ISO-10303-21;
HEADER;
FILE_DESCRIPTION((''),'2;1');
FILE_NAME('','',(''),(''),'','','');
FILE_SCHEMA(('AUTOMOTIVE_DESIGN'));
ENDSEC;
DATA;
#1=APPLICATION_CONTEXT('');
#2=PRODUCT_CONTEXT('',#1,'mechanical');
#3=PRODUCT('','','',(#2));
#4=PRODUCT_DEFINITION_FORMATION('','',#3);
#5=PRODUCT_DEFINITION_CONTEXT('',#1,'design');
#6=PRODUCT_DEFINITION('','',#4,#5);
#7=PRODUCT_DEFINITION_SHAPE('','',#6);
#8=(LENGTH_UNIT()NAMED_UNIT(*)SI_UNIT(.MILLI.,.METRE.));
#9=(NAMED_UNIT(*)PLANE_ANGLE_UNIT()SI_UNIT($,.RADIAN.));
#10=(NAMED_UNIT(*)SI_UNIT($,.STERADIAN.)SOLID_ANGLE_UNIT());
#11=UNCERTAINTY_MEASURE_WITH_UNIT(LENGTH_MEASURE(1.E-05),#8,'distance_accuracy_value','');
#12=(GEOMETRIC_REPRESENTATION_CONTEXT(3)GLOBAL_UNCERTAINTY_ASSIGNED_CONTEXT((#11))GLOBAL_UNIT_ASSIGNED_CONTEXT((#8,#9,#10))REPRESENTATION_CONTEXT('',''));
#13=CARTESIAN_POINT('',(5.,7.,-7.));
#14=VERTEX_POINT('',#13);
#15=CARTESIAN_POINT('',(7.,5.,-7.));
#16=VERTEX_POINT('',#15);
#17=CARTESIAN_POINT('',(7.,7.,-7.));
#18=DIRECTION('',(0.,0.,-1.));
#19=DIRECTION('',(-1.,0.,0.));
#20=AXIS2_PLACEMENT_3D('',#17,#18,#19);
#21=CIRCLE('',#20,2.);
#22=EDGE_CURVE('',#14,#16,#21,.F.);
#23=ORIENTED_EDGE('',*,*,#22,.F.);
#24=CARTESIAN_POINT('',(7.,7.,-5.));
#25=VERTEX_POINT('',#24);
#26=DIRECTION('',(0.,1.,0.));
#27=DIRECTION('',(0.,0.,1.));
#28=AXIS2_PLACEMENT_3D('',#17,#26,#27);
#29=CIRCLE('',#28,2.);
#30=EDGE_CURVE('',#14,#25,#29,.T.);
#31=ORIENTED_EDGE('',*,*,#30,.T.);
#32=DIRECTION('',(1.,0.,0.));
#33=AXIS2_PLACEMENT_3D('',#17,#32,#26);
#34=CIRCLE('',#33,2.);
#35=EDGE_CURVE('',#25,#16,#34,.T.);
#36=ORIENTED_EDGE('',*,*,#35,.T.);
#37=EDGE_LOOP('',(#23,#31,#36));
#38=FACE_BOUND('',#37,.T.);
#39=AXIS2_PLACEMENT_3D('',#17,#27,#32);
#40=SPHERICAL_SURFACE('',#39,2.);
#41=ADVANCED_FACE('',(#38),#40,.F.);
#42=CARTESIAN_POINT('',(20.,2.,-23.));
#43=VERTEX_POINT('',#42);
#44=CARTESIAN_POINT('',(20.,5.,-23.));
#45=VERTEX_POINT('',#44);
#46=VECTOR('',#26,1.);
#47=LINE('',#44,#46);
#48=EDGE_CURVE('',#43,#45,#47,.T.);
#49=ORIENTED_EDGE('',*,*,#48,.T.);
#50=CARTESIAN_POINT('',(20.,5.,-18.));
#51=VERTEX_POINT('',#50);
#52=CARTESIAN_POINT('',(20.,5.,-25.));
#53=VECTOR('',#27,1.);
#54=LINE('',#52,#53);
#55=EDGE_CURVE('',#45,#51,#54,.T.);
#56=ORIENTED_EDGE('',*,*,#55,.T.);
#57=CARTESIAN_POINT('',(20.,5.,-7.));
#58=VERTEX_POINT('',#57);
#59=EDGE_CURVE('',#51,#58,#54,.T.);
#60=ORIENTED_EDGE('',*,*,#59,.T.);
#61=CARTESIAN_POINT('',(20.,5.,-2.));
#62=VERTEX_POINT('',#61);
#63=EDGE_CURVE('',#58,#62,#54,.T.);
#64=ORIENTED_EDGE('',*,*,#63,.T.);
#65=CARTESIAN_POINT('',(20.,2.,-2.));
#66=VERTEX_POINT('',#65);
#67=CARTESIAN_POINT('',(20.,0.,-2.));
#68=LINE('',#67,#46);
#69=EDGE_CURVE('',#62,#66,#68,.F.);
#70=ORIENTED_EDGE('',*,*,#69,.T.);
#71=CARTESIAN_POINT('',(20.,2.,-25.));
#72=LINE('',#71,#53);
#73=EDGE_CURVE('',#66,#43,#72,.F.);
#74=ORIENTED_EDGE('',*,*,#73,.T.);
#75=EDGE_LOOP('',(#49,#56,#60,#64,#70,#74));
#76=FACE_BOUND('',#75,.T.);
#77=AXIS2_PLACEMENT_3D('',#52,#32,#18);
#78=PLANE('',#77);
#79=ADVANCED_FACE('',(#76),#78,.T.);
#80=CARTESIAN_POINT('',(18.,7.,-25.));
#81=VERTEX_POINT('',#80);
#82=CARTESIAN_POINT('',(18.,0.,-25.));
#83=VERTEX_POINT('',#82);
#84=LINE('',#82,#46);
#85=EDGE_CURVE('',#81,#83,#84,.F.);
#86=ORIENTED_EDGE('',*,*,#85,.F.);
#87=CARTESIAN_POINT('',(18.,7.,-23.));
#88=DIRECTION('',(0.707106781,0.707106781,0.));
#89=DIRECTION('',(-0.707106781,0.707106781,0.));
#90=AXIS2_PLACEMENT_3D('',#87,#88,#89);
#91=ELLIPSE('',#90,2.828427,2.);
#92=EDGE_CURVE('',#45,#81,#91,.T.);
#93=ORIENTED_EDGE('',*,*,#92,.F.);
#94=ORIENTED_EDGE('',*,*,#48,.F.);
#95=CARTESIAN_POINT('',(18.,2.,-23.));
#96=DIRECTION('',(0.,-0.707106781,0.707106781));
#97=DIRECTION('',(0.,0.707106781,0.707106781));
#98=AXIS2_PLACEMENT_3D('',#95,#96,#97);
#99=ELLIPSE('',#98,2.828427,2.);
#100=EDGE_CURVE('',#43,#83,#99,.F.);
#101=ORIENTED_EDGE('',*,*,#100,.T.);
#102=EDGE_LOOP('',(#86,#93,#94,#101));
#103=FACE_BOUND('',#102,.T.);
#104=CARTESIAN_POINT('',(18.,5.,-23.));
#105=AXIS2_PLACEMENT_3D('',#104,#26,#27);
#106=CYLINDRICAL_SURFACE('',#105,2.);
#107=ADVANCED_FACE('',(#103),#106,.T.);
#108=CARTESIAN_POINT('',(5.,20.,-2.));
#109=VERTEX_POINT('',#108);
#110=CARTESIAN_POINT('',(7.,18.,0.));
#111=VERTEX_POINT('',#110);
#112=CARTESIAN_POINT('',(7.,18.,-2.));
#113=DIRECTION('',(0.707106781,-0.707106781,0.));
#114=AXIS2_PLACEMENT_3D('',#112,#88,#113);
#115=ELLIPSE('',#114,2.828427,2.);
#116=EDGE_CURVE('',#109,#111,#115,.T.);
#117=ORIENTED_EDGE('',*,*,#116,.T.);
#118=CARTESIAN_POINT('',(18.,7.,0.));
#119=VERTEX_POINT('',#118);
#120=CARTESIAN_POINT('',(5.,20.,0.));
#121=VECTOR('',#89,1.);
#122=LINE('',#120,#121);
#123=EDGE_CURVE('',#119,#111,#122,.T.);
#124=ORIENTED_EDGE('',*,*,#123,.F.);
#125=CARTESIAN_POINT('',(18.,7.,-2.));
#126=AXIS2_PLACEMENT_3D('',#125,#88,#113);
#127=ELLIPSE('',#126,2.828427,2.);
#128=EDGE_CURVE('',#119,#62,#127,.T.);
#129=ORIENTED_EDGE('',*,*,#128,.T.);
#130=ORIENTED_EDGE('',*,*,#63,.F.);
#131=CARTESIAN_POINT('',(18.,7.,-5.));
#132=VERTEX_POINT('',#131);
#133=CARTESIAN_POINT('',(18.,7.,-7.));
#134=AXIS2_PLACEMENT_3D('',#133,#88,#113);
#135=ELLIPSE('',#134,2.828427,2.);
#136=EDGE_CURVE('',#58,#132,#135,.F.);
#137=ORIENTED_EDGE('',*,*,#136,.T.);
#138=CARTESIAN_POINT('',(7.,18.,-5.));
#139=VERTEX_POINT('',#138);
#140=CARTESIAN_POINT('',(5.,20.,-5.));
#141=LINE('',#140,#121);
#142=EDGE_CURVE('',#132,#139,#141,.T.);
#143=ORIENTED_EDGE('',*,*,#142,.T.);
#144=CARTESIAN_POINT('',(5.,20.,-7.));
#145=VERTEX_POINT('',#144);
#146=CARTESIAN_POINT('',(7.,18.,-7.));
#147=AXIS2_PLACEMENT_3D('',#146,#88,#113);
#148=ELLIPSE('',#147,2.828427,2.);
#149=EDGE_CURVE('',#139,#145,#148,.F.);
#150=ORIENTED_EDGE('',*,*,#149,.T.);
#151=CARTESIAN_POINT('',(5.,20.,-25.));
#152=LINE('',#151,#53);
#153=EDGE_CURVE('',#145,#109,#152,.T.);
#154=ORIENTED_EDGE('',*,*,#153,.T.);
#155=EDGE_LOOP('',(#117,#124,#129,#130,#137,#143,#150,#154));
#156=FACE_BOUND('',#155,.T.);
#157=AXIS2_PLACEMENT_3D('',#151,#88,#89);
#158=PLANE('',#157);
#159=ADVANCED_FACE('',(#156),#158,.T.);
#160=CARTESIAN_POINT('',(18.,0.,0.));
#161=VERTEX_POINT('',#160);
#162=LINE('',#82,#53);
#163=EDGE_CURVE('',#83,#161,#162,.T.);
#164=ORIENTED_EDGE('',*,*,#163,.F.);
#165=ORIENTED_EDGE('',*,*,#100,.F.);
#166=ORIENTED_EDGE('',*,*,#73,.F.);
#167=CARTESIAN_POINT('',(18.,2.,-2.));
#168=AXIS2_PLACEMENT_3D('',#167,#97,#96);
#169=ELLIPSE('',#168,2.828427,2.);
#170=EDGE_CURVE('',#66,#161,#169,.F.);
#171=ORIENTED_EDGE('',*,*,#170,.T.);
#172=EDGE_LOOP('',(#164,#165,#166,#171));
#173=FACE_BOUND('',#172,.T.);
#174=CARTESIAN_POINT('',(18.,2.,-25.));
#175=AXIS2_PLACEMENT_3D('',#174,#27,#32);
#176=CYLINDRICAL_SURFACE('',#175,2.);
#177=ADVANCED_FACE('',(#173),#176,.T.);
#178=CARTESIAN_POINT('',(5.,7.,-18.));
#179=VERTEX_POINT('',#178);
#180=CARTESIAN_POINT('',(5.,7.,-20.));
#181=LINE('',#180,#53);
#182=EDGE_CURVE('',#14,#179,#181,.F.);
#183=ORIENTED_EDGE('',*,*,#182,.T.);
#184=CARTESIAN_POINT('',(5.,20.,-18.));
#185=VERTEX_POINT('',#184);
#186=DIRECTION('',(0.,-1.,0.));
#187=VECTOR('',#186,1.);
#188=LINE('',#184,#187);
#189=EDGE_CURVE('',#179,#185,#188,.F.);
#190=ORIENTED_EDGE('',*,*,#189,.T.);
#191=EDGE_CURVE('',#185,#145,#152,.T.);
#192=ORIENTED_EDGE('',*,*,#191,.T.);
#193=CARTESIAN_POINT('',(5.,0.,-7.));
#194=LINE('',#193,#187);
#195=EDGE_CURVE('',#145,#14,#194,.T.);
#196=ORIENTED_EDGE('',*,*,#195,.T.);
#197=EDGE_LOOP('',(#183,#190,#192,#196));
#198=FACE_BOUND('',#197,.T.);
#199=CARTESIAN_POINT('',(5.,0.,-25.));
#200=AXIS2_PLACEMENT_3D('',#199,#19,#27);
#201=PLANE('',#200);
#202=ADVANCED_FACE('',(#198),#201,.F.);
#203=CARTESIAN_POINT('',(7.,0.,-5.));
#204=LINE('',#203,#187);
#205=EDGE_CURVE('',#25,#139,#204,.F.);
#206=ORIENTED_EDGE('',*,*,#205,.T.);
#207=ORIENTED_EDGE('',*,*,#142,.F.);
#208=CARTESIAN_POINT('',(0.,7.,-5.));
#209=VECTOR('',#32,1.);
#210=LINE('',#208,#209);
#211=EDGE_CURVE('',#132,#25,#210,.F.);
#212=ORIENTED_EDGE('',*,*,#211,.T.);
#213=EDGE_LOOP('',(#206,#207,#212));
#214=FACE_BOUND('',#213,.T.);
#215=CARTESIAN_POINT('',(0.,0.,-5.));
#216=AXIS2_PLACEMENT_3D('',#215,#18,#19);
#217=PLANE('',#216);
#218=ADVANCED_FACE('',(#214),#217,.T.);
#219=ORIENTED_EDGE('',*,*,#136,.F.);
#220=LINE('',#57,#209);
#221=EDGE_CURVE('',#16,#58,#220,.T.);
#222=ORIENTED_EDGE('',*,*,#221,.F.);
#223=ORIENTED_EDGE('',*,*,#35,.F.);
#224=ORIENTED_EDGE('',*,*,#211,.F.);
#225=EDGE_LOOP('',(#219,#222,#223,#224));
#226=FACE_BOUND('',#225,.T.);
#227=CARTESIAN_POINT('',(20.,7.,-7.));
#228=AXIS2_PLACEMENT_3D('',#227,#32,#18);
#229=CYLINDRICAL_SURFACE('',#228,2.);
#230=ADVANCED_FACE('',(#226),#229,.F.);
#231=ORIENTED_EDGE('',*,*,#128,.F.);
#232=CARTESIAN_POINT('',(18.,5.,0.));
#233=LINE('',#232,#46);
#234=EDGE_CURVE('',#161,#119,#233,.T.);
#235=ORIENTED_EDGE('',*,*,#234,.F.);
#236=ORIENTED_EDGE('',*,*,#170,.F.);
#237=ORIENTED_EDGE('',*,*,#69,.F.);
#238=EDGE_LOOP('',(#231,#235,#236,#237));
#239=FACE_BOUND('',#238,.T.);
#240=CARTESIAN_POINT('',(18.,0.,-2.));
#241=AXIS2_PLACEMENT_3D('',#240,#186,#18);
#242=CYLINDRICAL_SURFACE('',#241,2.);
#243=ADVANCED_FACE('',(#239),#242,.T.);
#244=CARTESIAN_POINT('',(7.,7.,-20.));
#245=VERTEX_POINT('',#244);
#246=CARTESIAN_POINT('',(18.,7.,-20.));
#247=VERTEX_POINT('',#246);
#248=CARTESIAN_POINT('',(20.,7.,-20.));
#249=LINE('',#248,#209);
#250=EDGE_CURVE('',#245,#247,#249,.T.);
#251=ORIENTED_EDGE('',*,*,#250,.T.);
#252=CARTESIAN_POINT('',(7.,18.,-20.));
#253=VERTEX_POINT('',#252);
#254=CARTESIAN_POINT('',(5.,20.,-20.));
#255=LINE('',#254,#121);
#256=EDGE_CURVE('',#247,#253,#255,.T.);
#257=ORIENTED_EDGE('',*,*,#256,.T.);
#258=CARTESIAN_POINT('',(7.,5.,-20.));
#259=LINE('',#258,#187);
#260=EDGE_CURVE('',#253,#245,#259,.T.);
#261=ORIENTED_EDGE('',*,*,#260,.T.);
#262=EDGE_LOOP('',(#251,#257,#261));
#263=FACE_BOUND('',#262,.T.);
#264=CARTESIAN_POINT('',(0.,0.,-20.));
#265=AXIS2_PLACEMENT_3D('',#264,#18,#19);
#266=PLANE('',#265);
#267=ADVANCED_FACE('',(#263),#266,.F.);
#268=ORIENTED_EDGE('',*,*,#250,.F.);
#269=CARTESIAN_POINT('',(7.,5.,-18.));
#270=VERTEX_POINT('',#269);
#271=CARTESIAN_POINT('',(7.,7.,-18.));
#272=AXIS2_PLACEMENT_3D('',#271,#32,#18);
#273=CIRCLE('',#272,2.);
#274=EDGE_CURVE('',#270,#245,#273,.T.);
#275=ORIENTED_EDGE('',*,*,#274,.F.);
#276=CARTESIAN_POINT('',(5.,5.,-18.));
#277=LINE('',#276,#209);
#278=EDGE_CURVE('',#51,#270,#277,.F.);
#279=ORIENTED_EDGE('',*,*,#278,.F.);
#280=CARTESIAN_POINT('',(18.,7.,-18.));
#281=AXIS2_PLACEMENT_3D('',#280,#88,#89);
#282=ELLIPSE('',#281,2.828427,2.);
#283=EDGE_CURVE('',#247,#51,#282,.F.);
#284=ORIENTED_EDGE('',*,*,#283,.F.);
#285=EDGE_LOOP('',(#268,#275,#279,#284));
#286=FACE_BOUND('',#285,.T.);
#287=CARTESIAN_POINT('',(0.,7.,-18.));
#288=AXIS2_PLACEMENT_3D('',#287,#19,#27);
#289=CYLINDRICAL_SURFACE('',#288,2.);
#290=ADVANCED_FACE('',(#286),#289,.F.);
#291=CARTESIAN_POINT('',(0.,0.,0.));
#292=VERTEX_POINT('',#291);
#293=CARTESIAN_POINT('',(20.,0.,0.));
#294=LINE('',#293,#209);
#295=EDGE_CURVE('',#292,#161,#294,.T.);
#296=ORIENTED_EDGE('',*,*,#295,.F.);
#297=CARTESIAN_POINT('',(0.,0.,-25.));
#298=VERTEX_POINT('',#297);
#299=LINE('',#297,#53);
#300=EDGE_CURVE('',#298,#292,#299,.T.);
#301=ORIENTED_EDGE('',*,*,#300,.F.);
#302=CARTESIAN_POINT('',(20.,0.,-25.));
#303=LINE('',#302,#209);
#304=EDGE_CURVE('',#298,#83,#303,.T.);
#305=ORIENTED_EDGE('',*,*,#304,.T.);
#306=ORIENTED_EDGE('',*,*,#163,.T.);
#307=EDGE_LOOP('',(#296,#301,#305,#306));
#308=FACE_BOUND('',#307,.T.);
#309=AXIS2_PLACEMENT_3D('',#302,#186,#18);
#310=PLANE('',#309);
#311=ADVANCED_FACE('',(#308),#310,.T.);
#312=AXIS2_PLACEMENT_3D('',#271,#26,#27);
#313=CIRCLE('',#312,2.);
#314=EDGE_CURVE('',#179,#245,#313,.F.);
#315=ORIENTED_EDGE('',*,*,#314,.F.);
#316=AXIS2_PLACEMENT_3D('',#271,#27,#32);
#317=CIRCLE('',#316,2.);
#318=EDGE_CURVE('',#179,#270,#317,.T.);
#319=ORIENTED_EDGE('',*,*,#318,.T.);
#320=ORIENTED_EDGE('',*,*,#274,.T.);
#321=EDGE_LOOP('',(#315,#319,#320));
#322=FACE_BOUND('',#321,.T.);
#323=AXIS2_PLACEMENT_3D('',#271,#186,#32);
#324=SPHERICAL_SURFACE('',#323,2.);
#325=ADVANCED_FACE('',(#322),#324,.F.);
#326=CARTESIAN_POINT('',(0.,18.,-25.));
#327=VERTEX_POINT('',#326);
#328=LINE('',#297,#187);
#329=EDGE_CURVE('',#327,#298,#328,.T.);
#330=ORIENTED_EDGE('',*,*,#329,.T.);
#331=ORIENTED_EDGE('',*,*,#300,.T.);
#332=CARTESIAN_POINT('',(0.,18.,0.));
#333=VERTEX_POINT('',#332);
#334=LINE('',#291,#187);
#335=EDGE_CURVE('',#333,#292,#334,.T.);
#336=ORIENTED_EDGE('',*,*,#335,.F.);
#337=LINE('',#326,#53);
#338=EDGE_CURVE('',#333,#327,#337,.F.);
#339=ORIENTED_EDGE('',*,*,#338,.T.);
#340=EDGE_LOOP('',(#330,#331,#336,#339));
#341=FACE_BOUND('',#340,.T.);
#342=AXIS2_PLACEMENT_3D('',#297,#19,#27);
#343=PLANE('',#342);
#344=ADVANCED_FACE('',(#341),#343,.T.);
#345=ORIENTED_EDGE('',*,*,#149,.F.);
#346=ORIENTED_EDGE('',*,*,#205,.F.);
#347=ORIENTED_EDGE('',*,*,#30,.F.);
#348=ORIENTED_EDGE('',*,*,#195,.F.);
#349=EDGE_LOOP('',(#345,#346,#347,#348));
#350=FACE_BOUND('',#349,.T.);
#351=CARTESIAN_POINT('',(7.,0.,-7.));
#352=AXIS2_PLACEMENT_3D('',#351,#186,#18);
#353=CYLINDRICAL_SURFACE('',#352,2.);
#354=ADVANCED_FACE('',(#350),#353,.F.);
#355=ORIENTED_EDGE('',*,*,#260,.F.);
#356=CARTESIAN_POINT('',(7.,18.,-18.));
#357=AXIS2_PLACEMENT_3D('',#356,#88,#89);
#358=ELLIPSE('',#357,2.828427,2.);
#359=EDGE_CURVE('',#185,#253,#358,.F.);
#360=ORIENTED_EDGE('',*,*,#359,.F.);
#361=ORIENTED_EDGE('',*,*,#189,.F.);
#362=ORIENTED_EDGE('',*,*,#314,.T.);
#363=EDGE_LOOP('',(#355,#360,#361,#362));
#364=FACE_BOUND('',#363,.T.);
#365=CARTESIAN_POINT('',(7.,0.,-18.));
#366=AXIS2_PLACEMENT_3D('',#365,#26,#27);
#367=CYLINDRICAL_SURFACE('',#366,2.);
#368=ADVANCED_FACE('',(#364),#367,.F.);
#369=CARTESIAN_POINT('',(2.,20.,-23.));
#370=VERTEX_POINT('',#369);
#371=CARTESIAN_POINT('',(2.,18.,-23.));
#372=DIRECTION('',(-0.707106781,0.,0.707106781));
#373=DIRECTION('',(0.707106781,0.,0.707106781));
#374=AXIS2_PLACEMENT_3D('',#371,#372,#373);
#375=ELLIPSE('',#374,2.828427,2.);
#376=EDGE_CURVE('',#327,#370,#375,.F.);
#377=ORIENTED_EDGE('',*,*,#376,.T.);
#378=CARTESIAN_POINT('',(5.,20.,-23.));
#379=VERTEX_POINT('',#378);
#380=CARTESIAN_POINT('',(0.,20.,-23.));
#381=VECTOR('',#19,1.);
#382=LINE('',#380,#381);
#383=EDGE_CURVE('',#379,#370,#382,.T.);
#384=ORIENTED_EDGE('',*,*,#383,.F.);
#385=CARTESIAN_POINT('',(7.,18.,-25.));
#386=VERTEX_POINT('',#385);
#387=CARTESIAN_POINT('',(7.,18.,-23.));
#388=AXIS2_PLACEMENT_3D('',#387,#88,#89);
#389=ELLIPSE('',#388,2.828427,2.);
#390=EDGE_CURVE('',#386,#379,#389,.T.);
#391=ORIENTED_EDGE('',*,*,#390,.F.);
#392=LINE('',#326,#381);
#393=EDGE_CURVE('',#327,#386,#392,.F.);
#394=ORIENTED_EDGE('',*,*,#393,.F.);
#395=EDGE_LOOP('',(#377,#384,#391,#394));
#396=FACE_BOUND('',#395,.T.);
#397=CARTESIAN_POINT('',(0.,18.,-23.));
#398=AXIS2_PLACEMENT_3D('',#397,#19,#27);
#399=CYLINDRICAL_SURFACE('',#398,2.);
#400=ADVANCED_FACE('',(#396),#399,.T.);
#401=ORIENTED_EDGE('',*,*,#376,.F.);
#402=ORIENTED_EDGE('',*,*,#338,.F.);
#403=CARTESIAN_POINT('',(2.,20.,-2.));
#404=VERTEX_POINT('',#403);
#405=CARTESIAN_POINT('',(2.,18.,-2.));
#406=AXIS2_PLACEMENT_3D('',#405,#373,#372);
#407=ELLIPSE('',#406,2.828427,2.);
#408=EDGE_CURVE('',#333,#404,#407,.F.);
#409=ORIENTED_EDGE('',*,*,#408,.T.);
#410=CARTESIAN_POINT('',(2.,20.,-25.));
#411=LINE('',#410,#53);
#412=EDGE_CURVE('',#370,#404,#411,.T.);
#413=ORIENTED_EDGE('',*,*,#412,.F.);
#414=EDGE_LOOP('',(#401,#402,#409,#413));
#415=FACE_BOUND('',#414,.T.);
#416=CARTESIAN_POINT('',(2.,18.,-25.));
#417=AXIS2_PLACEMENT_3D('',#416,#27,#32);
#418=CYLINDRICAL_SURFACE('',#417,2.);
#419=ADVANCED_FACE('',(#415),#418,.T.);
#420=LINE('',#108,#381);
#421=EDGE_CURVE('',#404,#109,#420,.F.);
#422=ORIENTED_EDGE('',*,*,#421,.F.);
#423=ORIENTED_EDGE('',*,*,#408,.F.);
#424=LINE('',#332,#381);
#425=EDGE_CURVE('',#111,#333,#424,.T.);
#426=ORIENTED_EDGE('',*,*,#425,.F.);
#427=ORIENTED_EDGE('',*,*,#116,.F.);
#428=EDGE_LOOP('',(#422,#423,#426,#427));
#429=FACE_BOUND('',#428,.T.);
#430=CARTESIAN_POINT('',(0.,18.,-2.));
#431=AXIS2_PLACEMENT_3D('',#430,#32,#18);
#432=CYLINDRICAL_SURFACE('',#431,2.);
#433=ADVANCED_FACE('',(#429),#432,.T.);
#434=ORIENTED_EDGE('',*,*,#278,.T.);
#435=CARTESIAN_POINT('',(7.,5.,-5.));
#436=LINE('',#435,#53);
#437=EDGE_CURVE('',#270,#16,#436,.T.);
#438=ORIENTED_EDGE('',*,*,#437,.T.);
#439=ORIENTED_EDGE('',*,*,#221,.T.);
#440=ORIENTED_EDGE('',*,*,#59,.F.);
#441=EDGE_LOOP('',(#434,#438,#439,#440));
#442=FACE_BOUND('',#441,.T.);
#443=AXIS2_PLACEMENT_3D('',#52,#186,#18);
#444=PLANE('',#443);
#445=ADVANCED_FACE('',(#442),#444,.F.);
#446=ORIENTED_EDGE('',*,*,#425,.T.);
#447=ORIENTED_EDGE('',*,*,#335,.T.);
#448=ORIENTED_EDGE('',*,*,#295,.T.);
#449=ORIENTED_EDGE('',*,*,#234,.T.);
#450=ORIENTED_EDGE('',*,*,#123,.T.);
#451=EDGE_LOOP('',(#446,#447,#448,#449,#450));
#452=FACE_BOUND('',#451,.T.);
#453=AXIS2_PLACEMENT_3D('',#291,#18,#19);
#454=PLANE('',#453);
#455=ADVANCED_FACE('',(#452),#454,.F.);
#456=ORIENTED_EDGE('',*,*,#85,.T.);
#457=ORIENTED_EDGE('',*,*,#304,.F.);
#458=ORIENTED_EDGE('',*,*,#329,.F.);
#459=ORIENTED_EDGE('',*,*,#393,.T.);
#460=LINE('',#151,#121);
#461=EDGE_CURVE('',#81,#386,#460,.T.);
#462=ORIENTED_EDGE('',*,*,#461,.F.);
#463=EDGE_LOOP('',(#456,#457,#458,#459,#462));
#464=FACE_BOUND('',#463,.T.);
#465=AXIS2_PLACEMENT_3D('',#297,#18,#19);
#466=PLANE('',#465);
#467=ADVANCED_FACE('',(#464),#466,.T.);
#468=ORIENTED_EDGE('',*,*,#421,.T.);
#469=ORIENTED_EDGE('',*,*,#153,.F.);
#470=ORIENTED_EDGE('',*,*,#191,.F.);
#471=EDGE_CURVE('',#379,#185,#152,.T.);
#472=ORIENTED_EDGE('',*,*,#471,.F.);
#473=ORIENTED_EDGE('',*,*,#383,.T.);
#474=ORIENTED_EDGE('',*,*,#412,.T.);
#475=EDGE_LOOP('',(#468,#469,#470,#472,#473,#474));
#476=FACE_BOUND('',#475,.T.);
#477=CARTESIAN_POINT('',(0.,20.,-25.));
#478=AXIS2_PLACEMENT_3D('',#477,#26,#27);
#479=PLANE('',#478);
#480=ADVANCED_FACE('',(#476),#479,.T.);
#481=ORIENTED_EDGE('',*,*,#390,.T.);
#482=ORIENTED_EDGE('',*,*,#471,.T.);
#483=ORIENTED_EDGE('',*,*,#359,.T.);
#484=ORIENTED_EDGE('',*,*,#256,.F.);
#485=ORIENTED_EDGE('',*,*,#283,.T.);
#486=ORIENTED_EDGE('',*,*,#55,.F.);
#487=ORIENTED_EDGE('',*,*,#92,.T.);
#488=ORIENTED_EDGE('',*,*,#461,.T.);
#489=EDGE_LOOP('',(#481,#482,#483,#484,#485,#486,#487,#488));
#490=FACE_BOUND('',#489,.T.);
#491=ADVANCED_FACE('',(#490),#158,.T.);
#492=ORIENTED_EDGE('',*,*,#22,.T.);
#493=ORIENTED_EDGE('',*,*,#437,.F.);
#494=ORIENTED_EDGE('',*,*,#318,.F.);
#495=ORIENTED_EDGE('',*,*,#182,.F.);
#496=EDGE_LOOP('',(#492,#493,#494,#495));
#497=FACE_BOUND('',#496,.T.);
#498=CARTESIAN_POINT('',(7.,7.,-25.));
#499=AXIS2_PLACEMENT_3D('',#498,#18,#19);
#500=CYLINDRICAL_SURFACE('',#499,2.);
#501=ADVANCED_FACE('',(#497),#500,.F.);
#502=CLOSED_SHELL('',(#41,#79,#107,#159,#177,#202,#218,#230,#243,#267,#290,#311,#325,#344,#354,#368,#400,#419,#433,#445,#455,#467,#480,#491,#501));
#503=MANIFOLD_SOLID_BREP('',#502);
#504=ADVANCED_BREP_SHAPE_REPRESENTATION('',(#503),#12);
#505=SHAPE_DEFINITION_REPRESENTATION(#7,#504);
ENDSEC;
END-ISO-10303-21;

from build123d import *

# Parameters (mm, degrees)
BOSS_EXTRUDE2_DEPTH = 25
SHELL1_START        = 5
SHELL1_OUTLINE_W    = 16
SHELL1_OUTLINE_H    = 15
SHELL1_DEPTH        = 15
FILLET1_R           = 2
FILLET3_R           = 2


# Read off the part's stored shape, not the designer's step: Shell1
with BuildPart() as part:
    # Sketch1 → Boss-Extrude2 (new body)
    with BuildSketch(Plane.XY):
        Polygon((0, 0), (0, 20), (5, 20), (20, 5), (20, 0), align=None)
    extrude(amount=-BOSS_EXTRUDE2_DEPTH)

    # Shell1 outline → Shell1 (cut)
    with BuildSketch(Plane(origin=(0, 0, 0), x_dir=(1, 0, 0), z_dir=(0, 1, 0)).offset(SHELL1_START)):
        with Locations((13, 12.5)):
            Rectangle(SHELL1_OUTLINE_W, SHELL1_OUTLINE_H)
    extrude(amount=SHELL1_DEPTH, mode=Mode.SUBTRACT)

    # Fillet1
    fillet1_edges = [part.edges().sort_by_distance(p)[0] for p in [
        (12.5, 5, -20),
        (5, 12.5, -20),
        (5, 5, -12.5),
        (12.5, 5, -5),
        (5, 12.5, -5),
    ]]
    fillet(fillet1_edges, radius=FILLET1_R)

    # Fillet3
    fillet3_edges = [part.edges().sort_by_distance(p)[0] for p in [
        (2.5, 20, -25),
        (2.5, 20, 0),
        (20, 2.5, 0),
        (20, 2.5, -25),
        (0, 20, -12.5),
        (20, 0, -12.5),
    ]]
    fillet(fillet3_edges, radius=FILLET3_R)


solid = part.part
